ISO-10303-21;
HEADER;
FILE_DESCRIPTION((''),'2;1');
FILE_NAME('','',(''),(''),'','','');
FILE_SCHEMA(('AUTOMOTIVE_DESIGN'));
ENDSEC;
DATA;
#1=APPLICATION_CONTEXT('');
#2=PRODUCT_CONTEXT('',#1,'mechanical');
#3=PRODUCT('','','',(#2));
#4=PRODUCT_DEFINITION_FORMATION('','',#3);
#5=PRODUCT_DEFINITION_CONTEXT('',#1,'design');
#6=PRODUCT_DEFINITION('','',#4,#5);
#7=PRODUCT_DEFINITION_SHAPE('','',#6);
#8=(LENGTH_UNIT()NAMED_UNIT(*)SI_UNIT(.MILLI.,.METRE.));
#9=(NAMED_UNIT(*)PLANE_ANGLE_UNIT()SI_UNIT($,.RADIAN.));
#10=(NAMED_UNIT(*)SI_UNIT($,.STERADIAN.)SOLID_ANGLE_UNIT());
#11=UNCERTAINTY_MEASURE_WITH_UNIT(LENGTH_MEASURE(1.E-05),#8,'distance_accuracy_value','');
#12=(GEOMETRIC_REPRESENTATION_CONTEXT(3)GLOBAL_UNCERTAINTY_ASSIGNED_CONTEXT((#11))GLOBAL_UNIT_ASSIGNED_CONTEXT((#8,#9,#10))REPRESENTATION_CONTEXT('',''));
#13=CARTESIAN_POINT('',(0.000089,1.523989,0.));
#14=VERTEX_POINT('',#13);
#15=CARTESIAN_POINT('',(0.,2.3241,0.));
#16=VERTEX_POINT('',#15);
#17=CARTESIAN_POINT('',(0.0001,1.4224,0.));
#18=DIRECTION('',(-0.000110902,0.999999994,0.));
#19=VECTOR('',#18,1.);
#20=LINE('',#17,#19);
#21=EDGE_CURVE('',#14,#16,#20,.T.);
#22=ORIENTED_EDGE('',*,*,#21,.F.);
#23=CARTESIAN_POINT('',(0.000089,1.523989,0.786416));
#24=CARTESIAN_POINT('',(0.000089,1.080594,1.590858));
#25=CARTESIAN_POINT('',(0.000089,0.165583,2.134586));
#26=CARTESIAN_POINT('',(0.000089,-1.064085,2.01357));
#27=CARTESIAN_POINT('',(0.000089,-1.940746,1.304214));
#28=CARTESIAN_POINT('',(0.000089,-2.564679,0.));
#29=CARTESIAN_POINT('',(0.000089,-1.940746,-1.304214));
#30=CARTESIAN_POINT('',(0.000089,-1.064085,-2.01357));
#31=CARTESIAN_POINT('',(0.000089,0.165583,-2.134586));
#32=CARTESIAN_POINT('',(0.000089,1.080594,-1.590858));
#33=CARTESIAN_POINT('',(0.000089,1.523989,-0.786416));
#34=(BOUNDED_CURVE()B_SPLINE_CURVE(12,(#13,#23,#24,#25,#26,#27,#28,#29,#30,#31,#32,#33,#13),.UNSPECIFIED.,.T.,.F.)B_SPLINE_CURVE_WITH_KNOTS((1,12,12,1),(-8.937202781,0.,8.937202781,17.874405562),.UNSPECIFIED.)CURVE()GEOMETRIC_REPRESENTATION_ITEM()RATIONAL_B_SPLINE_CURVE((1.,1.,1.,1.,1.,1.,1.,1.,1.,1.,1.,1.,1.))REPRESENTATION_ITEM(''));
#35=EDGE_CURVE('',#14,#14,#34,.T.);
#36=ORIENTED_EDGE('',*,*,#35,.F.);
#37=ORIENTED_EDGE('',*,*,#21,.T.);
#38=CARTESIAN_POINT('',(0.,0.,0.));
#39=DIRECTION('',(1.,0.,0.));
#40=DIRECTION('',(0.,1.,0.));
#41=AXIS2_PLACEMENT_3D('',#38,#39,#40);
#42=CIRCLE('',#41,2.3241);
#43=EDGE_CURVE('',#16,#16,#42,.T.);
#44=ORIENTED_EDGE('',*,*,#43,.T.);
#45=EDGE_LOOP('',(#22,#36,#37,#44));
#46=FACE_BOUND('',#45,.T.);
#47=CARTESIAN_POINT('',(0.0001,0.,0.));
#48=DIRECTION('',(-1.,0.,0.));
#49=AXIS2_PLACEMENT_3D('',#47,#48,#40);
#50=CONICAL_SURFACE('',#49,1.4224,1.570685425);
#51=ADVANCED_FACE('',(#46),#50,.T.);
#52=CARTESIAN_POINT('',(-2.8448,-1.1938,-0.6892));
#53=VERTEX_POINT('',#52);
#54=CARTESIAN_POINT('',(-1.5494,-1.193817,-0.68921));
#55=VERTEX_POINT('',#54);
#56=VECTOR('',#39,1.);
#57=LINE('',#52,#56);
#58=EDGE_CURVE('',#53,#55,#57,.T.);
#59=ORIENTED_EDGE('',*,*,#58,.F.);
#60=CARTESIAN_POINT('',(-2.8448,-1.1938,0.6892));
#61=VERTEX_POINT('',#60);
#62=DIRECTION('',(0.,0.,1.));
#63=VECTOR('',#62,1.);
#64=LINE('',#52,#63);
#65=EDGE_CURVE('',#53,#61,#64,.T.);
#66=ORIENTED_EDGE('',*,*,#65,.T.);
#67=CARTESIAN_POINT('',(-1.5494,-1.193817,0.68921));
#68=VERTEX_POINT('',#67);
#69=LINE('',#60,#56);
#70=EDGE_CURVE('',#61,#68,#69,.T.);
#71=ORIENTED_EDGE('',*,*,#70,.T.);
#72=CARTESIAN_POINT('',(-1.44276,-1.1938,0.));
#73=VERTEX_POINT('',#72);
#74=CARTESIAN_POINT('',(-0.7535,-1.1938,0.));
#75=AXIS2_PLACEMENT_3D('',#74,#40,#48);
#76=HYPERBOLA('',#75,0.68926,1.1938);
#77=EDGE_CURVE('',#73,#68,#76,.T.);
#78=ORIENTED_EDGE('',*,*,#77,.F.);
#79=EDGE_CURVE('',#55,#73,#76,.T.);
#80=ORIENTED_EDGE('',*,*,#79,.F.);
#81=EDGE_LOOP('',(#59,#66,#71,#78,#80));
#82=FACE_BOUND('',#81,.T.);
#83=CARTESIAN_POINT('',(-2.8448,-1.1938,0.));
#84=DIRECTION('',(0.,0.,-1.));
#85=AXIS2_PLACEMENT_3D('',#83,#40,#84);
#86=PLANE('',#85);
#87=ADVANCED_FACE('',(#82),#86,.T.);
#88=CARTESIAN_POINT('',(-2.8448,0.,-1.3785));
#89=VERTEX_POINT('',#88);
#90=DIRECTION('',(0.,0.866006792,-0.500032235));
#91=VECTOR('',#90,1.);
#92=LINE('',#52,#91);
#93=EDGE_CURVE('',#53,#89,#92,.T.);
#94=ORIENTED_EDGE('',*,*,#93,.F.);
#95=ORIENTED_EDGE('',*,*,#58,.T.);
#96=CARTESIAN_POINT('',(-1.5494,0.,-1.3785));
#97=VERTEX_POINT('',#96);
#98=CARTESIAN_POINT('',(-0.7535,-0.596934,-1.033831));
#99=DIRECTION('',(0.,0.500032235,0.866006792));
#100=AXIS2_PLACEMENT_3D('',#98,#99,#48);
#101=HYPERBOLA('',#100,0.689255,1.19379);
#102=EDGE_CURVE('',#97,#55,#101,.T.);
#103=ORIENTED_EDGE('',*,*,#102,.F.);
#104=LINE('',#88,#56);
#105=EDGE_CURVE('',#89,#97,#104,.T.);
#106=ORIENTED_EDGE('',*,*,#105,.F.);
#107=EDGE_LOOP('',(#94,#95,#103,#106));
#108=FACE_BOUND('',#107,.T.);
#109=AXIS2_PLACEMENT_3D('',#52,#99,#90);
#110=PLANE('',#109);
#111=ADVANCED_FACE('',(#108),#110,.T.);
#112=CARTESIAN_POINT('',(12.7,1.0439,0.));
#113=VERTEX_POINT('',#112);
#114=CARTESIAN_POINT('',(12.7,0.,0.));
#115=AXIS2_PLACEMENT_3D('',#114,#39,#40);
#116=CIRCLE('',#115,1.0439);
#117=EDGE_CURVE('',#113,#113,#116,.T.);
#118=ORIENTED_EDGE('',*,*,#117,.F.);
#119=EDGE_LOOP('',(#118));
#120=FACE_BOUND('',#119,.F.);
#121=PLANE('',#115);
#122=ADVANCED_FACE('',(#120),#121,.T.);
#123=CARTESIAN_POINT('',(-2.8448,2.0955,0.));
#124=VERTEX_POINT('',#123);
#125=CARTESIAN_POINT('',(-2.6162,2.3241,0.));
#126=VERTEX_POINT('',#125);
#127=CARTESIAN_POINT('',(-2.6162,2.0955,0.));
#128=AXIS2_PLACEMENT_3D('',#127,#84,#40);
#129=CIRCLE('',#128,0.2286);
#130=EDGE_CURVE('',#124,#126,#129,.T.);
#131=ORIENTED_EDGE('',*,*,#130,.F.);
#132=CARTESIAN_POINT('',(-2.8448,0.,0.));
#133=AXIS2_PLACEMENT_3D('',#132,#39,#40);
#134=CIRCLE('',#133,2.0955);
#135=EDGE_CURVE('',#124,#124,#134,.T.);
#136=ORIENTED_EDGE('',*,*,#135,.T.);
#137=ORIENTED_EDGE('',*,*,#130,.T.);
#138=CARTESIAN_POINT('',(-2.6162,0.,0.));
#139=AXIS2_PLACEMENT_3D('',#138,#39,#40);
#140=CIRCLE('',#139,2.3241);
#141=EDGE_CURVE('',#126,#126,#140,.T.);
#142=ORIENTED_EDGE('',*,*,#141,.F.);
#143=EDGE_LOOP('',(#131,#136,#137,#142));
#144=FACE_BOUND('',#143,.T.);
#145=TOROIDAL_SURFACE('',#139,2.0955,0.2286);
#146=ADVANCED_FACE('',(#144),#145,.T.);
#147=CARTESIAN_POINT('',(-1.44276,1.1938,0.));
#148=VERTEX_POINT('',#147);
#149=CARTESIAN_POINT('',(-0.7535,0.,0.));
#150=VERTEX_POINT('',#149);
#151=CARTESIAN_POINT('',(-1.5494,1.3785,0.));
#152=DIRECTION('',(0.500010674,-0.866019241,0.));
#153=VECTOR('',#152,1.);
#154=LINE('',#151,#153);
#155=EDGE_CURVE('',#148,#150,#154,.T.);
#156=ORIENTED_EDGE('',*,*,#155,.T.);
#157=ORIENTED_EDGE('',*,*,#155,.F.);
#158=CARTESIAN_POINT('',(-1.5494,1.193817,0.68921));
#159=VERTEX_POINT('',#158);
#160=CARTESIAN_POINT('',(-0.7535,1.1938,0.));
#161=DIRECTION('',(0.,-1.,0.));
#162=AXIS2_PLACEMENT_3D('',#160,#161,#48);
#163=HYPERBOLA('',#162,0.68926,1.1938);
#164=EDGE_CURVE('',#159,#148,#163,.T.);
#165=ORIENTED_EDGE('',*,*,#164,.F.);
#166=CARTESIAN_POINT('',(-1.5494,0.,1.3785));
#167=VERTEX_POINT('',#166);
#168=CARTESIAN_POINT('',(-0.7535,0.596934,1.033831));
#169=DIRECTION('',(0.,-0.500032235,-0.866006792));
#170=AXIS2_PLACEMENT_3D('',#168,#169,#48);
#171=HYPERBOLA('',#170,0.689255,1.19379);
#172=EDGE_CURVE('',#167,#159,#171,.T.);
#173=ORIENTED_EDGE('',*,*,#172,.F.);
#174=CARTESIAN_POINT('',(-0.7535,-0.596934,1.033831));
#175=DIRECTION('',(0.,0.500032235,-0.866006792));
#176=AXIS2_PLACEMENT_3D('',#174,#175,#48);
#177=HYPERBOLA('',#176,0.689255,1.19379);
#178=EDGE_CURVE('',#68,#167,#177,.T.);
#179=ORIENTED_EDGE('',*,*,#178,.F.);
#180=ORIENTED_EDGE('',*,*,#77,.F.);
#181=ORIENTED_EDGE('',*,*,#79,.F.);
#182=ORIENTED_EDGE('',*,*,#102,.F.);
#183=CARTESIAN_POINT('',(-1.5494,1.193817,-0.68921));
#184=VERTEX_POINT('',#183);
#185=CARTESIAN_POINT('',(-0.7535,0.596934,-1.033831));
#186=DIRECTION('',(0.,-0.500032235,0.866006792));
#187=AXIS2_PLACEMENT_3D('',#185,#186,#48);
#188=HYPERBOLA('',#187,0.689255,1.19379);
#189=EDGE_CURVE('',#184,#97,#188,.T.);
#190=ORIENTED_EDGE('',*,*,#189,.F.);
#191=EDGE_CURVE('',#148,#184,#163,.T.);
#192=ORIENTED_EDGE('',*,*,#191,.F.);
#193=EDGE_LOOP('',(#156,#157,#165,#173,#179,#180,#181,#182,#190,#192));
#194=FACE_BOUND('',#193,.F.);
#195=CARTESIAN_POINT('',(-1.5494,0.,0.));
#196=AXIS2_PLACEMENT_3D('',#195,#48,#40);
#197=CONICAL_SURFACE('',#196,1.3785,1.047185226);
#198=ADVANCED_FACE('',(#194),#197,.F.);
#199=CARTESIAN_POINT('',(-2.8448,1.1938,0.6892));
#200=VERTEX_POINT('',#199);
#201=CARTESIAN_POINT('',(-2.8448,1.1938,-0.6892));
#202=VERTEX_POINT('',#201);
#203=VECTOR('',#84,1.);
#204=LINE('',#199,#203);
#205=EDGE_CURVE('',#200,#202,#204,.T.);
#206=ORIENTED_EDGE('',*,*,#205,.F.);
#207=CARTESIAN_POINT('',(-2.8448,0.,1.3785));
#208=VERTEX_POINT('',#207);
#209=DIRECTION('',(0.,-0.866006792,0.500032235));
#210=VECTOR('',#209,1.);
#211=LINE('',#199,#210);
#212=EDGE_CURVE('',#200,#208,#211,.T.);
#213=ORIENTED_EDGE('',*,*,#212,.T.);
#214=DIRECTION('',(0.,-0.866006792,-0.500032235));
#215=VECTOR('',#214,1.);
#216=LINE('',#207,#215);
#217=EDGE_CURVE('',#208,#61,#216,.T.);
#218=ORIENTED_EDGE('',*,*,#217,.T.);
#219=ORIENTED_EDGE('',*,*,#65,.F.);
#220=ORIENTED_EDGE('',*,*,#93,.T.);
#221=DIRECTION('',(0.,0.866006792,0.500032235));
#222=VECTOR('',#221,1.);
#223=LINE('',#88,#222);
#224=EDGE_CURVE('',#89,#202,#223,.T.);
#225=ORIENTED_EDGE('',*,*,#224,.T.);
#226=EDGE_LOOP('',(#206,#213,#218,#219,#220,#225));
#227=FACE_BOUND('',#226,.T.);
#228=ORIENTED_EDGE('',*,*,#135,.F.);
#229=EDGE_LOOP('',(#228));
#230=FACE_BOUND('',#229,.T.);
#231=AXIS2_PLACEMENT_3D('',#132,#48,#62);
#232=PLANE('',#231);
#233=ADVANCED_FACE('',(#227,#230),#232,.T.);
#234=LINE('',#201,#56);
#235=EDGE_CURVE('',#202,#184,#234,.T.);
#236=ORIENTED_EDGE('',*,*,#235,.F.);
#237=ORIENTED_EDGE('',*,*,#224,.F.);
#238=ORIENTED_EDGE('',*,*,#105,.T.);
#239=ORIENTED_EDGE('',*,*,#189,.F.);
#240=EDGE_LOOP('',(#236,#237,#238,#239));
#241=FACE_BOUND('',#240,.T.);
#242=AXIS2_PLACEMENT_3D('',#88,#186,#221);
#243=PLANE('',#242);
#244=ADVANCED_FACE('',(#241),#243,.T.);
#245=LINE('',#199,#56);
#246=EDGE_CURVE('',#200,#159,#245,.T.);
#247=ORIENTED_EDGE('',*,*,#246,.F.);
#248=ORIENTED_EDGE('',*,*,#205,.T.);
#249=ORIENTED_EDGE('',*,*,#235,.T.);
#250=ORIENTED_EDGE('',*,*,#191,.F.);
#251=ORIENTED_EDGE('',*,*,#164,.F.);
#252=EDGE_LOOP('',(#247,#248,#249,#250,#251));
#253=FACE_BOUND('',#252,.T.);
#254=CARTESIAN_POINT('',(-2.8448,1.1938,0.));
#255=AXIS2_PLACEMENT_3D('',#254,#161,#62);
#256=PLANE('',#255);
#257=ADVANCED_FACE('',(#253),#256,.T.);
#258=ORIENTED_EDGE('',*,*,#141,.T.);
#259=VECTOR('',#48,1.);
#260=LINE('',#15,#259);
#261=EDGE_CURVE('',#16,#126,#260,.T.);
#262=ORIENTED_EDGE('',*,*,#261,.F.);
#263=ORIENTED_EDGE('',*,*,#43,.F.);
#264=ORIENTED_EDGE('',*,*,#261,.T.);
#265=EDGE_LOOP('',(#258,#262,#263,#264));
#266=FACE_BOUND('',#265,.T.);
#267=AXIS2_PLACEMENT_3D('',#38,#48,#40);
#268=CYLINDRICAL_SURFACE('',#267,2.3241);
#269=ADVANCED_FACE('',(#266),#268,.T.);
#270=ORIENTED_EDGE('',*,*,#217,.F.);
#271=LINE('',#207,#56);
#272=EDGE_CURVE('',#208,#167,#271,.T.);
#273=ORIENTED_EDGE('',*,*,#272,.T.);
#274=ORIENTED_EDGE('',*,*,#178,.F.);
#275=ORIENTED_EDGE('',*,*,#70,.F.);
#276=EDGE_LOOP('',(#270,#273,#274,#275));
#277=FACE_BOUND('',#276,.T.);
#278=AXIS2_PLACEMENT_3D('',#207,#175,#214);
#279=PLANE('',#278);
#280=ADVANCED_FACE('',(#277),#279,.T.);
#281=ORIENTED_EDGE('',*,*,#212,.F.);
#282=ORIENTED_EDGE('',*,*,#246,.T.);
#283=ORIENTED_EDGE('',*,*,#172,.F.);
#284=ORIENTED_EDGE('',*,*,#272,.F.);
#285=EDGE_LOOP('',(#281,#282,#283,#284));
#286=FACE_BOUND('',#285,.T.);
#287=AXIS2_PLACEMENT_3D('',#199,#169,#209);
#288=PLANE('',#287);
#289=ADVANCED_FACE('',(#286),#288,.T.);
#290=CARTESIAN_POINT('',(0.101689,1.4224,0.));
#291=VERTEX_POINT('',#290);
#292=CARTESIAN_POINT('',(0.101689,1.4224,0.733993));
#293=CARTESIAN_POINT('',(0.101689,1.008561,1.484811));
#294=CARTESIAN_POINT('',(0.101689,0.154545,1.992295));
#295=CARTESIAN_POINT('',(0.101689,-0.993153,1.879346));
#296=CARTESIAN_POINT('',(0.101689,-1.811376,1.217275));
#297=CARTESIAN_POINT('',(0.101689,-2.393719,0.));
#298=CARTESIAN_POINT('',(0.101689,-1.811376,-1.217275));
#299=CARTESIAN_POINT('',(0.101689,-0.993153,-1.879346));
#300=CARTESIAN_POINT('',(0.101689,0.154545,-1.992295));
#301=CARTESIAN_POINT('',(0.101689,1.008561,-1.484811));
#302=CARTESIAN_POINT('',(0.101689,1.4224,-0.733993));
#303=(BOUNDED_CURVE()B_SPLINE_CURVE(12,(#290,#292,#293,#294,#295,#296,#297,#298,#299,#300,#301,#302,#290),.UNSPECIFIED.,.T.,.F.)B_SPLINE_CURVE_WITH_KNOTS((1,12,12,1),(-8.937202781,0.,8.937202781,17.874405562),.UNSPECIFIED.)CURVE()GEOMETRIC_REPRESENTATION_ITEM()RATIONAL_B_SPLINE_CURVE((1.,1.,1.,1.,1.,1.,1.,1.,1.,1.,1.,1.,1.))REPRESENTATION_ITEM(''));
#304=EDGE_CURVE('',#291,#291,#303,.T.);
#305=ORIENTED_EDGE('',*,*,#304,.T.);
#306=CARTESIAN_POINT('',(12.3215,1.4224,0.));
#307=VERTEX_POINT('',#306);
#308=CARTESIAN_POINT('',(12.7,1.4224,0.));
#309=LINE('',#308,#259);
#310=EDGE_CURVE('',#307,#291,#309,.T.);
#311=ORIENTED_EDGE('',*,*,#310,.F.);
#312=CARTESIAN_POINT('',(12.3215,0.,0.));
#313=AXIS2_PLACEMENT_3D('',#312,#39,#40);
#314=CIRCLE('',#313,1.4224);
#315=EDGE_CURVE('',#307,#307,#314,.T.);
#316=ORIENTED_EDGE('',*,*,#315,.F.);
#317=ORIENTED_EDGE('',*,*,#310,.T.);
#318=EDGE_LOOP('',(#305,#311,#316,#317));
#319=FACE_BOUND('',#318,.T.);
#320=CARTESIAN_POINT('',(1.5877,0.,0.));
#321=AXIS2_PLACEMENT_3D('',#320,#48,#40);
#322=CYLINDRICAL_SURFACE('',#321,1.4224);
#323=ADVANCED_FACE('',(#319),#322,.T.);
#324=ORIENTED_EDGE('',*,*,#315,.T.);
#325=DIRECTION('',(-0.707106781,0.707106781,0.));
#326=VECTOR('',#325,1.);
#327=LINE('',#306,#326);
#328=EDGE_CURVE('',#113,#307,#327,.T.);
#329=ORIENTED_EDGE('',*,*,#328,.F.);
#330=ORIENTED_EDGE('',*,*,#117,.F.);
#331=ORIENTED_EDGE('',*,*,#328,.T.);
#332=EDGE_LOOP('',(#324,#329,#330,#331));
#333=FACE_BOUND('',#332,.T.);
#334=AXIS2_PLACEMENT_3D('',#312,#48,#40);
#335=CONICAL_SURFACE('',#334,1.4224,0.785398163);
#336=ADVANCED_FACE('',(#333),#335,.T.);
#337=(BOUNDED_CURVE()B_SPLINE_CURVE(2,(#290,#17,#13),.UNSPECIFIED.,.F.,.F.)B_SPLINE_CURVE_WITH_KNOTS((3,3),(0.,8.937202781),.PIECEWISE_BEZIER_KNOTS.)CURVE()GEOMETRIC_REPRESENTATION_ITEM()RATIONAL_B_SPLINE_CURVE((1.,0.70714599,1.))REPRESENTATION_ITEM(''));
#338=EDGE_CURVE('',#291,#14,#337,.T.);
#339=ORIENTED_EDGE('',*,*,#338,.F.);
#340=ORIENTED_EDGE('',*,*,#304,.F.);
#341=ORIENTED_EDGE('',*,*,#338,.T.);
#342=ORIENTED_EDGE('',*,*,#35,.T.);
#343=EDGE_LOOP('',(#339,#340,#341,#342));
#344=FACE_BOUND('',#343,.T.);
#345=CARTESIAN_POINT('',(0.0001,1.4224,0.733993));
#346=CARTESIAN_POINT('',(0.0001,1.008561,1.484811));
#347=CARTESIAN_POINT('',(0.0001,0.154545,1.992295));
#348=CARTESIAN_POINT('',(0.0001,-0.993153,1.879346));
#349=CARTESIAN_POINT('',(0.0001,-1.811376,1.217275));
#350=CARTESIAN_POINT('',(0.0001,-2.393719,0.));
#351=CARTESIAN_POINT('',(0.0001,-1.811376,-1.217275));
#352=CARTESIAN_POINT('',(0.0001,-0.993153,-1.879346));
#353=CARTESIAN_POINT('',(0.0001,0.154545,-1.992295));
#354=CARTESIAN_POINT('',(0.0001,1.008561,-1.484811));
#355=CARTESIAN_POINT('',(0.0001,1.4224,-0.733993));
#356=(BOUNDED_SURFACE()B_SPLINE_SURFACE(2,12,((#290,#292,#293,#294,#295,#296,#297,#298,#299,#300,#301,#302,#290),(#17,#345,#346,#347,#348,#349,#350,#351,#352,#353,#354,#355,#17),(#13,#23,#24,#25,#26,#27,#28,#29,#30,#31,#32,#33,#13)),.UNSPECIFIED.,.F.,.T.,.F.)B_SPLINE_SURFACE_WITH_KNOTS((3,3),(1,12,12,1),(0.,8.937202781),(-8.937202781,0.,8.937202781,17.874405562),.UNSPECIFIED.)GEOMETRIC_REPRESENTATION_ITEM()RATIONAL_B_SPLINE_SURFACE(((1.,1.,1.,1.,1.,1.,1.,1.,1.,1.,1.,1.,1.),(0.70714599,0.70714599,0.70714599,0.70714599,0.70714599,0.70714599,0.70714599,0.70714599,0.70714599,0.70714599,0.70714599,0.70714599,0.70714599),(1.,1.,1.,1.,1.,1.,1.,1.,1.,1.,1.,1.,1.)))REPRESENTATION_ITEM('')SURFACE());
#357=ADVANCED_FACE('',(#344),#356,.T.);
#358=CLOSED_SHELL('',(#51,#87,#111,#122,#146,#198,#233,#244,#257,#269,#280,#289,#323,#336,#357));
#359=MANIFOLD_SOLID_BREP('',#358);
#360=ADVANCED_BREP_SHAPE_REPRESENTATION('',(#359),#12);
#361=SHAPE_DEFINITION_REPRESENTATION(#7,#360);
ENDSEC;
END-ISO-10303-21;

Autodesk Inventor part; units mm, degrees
ref_plane "YZ Plane" through (0, 0, 0) normal (1, 0, 0) x (0, 1, 0)
ref_plane "XZ Plane" through (0, 0, 0) normal (0, 1, 0) x (-1, 0, 0)
sketch "Sketch1" plane through (0, 0, 0) normal (0, 0, 1) x (1, 0, 0)
  line L0 (-0.7535, 0) -> (12.7, 0)
  line L1 (12.7, 0) -> (12.7, 1.4224)
  line L2 (12.7, 1.4224) -> (1.5877, 1.4224)
  line L3 (1.5877, 1.4224) -> (0.0001, 1.4224)
  line L4 (0.0001, 1.4224) -> (0, 1.4224)
  line L5 (0, 1.4224) -> (0, 2.3241)
  line L6 (0, 2.3241) -> (-2.8448, 2.3241)
  line L7 (-2.8448, 2.3241) -> (-2.8448, 1.3785)
  line L8 (-2.8448, 1.3785) -> (-1.5494, 1.3785)
  line L9 (-1.5494, 1.3785) -> (-0.7535, 0)
  line L10 (-5.9538, 0) -> (15.809, 0) projected
  line L11 (0, -0.4648) -> (0, 2.7889) projected
  line L12 (1.5877, 1.4224) -> (0, 1.4224) construction
  dimension "d1" = 11.1123
  dimension "d2" = 1.5876
  dimension "d3" = 2.8448
  dimension "d4" = 1.2954
  dimension "d5" = 60
  dimension "d6" = 2.8448
  dimension "d7" = 2.8448
  dimension "d8" = 2.757
  dimension "d9" = 4.6482
  dimension "d26" = 12.7
revolve "Body" add sketch "Sketch1" angle 360 about axis through (-0.7535, 0, 0) along (1, 0, 0)
sketch "Sketch2" plane through (-2.8448, 0, 0) normal (-1, 0, 0) x (0, 0, 1)
  circle A0 centre (0, 0) radius 1.3785 projected
  line L0 (0, -3.2537) -> (0, 3.2537) projected
  line L1 (-3.2537, 0) -> (3.2537, 0) projected
  line L2 (1.3785, 0) -> (0.6892, -1.1938)
  line L3 (0.6892, -1.1938) -> (-0.6892, -1.1938)
  line L4 (-0.6892, -1.1938) -> (-1.3785, 0)
  line L5 (-1.3785, 0) -> (-0.6892, 1.1938)
  line L6 (-0.6892, 1.1938) -> (0.6892, 1.1938)
  line L7 (0.6892, 1.1938) -> (1.3785, 0)
  point P0 (0, 0)
extrude "Slot" add sketch "Sketch2" against normal up to next contours L7 A0 | A0 L2 | L6 L0 A0 | A0 L0 L3 | L0 L6 A0 | A0 L3 L0 | L4 A0 | A0 L5
fillet "Fillet1" radius 0.2286 1 edges at (-2.8448, -2.3241, 0)
thread "Thread" size "4-40 UNC" class "2A" standard "ANSI Unified Screw Threads" length 11.1123
chamfer "Chamfer1" distance 0.3785 distance2 0.3785 1 edges at (12.7, -1.4224, 0) measured on face at (12.7, -0.2537, -0.5191)
ref_plane "Work Plane1" through (29, 0, 0) normal (0, -1, 0) x (1, 0, 0)
fillet "Fillet2" radius 0.1016 1 edges at (0.0001, -1.4224, 0)
equation "\"d1\" = GEL"
equation "\"d3\" = KOH"
equation "\"d4\" = INTI"
equation "\"d6\" = GD"
equation "\"d7\" = BDM"
equation "\"d8\" = 1.1547 * SW"
equation "\"d9\" = KOD"
equation "\"d26\" = NLG"
equation "\"d30\" = R"
equation "\"d17\" = RR"
equation "\"d13\" = GEL"
equation "\"d15\" = -0.5 * SPD + 0.5 * GD"
equation "\"d16\" = GUL"
equation "\"GD\" = 2.8448"
equation "\"NLG\" = 12.7"
equation "\"GEL\" = 11.1123"
equation "\"KOD\" = 4.6482"
equation "\"KOH\" = 2.8448"
equation "\"INTI\" = 1.2954"
equation "\"GAL\" = 1.5875"
equation "\"GUL\" = 0.37846"
equation "\"BDM\" = 2.8448"
equation "\"SW\" = 2.3876"
equation "\"RR\" = 0.2286"
equation "\"SPD\" = 2.08788"
equation "\"R\" = 0.1016"
equation "\"PHH\" = 0.127"
equation "\"GD1\" = SPD"
equation "\"THREADDIA\" = 2.8448"
equation "\"FAWI\" = 45deg"
equation "\"KOH1\" = 2.5654"
equation "\"NND\" = 2.8448"
equation "\"TOA\" = 30deg"
equation "\"E0\" = 1.155 * SW"
properties part number "ANSI B18.3 - No. 4 - 40 UNC - 1/2 HS HCS" material "Steel, Mild"
